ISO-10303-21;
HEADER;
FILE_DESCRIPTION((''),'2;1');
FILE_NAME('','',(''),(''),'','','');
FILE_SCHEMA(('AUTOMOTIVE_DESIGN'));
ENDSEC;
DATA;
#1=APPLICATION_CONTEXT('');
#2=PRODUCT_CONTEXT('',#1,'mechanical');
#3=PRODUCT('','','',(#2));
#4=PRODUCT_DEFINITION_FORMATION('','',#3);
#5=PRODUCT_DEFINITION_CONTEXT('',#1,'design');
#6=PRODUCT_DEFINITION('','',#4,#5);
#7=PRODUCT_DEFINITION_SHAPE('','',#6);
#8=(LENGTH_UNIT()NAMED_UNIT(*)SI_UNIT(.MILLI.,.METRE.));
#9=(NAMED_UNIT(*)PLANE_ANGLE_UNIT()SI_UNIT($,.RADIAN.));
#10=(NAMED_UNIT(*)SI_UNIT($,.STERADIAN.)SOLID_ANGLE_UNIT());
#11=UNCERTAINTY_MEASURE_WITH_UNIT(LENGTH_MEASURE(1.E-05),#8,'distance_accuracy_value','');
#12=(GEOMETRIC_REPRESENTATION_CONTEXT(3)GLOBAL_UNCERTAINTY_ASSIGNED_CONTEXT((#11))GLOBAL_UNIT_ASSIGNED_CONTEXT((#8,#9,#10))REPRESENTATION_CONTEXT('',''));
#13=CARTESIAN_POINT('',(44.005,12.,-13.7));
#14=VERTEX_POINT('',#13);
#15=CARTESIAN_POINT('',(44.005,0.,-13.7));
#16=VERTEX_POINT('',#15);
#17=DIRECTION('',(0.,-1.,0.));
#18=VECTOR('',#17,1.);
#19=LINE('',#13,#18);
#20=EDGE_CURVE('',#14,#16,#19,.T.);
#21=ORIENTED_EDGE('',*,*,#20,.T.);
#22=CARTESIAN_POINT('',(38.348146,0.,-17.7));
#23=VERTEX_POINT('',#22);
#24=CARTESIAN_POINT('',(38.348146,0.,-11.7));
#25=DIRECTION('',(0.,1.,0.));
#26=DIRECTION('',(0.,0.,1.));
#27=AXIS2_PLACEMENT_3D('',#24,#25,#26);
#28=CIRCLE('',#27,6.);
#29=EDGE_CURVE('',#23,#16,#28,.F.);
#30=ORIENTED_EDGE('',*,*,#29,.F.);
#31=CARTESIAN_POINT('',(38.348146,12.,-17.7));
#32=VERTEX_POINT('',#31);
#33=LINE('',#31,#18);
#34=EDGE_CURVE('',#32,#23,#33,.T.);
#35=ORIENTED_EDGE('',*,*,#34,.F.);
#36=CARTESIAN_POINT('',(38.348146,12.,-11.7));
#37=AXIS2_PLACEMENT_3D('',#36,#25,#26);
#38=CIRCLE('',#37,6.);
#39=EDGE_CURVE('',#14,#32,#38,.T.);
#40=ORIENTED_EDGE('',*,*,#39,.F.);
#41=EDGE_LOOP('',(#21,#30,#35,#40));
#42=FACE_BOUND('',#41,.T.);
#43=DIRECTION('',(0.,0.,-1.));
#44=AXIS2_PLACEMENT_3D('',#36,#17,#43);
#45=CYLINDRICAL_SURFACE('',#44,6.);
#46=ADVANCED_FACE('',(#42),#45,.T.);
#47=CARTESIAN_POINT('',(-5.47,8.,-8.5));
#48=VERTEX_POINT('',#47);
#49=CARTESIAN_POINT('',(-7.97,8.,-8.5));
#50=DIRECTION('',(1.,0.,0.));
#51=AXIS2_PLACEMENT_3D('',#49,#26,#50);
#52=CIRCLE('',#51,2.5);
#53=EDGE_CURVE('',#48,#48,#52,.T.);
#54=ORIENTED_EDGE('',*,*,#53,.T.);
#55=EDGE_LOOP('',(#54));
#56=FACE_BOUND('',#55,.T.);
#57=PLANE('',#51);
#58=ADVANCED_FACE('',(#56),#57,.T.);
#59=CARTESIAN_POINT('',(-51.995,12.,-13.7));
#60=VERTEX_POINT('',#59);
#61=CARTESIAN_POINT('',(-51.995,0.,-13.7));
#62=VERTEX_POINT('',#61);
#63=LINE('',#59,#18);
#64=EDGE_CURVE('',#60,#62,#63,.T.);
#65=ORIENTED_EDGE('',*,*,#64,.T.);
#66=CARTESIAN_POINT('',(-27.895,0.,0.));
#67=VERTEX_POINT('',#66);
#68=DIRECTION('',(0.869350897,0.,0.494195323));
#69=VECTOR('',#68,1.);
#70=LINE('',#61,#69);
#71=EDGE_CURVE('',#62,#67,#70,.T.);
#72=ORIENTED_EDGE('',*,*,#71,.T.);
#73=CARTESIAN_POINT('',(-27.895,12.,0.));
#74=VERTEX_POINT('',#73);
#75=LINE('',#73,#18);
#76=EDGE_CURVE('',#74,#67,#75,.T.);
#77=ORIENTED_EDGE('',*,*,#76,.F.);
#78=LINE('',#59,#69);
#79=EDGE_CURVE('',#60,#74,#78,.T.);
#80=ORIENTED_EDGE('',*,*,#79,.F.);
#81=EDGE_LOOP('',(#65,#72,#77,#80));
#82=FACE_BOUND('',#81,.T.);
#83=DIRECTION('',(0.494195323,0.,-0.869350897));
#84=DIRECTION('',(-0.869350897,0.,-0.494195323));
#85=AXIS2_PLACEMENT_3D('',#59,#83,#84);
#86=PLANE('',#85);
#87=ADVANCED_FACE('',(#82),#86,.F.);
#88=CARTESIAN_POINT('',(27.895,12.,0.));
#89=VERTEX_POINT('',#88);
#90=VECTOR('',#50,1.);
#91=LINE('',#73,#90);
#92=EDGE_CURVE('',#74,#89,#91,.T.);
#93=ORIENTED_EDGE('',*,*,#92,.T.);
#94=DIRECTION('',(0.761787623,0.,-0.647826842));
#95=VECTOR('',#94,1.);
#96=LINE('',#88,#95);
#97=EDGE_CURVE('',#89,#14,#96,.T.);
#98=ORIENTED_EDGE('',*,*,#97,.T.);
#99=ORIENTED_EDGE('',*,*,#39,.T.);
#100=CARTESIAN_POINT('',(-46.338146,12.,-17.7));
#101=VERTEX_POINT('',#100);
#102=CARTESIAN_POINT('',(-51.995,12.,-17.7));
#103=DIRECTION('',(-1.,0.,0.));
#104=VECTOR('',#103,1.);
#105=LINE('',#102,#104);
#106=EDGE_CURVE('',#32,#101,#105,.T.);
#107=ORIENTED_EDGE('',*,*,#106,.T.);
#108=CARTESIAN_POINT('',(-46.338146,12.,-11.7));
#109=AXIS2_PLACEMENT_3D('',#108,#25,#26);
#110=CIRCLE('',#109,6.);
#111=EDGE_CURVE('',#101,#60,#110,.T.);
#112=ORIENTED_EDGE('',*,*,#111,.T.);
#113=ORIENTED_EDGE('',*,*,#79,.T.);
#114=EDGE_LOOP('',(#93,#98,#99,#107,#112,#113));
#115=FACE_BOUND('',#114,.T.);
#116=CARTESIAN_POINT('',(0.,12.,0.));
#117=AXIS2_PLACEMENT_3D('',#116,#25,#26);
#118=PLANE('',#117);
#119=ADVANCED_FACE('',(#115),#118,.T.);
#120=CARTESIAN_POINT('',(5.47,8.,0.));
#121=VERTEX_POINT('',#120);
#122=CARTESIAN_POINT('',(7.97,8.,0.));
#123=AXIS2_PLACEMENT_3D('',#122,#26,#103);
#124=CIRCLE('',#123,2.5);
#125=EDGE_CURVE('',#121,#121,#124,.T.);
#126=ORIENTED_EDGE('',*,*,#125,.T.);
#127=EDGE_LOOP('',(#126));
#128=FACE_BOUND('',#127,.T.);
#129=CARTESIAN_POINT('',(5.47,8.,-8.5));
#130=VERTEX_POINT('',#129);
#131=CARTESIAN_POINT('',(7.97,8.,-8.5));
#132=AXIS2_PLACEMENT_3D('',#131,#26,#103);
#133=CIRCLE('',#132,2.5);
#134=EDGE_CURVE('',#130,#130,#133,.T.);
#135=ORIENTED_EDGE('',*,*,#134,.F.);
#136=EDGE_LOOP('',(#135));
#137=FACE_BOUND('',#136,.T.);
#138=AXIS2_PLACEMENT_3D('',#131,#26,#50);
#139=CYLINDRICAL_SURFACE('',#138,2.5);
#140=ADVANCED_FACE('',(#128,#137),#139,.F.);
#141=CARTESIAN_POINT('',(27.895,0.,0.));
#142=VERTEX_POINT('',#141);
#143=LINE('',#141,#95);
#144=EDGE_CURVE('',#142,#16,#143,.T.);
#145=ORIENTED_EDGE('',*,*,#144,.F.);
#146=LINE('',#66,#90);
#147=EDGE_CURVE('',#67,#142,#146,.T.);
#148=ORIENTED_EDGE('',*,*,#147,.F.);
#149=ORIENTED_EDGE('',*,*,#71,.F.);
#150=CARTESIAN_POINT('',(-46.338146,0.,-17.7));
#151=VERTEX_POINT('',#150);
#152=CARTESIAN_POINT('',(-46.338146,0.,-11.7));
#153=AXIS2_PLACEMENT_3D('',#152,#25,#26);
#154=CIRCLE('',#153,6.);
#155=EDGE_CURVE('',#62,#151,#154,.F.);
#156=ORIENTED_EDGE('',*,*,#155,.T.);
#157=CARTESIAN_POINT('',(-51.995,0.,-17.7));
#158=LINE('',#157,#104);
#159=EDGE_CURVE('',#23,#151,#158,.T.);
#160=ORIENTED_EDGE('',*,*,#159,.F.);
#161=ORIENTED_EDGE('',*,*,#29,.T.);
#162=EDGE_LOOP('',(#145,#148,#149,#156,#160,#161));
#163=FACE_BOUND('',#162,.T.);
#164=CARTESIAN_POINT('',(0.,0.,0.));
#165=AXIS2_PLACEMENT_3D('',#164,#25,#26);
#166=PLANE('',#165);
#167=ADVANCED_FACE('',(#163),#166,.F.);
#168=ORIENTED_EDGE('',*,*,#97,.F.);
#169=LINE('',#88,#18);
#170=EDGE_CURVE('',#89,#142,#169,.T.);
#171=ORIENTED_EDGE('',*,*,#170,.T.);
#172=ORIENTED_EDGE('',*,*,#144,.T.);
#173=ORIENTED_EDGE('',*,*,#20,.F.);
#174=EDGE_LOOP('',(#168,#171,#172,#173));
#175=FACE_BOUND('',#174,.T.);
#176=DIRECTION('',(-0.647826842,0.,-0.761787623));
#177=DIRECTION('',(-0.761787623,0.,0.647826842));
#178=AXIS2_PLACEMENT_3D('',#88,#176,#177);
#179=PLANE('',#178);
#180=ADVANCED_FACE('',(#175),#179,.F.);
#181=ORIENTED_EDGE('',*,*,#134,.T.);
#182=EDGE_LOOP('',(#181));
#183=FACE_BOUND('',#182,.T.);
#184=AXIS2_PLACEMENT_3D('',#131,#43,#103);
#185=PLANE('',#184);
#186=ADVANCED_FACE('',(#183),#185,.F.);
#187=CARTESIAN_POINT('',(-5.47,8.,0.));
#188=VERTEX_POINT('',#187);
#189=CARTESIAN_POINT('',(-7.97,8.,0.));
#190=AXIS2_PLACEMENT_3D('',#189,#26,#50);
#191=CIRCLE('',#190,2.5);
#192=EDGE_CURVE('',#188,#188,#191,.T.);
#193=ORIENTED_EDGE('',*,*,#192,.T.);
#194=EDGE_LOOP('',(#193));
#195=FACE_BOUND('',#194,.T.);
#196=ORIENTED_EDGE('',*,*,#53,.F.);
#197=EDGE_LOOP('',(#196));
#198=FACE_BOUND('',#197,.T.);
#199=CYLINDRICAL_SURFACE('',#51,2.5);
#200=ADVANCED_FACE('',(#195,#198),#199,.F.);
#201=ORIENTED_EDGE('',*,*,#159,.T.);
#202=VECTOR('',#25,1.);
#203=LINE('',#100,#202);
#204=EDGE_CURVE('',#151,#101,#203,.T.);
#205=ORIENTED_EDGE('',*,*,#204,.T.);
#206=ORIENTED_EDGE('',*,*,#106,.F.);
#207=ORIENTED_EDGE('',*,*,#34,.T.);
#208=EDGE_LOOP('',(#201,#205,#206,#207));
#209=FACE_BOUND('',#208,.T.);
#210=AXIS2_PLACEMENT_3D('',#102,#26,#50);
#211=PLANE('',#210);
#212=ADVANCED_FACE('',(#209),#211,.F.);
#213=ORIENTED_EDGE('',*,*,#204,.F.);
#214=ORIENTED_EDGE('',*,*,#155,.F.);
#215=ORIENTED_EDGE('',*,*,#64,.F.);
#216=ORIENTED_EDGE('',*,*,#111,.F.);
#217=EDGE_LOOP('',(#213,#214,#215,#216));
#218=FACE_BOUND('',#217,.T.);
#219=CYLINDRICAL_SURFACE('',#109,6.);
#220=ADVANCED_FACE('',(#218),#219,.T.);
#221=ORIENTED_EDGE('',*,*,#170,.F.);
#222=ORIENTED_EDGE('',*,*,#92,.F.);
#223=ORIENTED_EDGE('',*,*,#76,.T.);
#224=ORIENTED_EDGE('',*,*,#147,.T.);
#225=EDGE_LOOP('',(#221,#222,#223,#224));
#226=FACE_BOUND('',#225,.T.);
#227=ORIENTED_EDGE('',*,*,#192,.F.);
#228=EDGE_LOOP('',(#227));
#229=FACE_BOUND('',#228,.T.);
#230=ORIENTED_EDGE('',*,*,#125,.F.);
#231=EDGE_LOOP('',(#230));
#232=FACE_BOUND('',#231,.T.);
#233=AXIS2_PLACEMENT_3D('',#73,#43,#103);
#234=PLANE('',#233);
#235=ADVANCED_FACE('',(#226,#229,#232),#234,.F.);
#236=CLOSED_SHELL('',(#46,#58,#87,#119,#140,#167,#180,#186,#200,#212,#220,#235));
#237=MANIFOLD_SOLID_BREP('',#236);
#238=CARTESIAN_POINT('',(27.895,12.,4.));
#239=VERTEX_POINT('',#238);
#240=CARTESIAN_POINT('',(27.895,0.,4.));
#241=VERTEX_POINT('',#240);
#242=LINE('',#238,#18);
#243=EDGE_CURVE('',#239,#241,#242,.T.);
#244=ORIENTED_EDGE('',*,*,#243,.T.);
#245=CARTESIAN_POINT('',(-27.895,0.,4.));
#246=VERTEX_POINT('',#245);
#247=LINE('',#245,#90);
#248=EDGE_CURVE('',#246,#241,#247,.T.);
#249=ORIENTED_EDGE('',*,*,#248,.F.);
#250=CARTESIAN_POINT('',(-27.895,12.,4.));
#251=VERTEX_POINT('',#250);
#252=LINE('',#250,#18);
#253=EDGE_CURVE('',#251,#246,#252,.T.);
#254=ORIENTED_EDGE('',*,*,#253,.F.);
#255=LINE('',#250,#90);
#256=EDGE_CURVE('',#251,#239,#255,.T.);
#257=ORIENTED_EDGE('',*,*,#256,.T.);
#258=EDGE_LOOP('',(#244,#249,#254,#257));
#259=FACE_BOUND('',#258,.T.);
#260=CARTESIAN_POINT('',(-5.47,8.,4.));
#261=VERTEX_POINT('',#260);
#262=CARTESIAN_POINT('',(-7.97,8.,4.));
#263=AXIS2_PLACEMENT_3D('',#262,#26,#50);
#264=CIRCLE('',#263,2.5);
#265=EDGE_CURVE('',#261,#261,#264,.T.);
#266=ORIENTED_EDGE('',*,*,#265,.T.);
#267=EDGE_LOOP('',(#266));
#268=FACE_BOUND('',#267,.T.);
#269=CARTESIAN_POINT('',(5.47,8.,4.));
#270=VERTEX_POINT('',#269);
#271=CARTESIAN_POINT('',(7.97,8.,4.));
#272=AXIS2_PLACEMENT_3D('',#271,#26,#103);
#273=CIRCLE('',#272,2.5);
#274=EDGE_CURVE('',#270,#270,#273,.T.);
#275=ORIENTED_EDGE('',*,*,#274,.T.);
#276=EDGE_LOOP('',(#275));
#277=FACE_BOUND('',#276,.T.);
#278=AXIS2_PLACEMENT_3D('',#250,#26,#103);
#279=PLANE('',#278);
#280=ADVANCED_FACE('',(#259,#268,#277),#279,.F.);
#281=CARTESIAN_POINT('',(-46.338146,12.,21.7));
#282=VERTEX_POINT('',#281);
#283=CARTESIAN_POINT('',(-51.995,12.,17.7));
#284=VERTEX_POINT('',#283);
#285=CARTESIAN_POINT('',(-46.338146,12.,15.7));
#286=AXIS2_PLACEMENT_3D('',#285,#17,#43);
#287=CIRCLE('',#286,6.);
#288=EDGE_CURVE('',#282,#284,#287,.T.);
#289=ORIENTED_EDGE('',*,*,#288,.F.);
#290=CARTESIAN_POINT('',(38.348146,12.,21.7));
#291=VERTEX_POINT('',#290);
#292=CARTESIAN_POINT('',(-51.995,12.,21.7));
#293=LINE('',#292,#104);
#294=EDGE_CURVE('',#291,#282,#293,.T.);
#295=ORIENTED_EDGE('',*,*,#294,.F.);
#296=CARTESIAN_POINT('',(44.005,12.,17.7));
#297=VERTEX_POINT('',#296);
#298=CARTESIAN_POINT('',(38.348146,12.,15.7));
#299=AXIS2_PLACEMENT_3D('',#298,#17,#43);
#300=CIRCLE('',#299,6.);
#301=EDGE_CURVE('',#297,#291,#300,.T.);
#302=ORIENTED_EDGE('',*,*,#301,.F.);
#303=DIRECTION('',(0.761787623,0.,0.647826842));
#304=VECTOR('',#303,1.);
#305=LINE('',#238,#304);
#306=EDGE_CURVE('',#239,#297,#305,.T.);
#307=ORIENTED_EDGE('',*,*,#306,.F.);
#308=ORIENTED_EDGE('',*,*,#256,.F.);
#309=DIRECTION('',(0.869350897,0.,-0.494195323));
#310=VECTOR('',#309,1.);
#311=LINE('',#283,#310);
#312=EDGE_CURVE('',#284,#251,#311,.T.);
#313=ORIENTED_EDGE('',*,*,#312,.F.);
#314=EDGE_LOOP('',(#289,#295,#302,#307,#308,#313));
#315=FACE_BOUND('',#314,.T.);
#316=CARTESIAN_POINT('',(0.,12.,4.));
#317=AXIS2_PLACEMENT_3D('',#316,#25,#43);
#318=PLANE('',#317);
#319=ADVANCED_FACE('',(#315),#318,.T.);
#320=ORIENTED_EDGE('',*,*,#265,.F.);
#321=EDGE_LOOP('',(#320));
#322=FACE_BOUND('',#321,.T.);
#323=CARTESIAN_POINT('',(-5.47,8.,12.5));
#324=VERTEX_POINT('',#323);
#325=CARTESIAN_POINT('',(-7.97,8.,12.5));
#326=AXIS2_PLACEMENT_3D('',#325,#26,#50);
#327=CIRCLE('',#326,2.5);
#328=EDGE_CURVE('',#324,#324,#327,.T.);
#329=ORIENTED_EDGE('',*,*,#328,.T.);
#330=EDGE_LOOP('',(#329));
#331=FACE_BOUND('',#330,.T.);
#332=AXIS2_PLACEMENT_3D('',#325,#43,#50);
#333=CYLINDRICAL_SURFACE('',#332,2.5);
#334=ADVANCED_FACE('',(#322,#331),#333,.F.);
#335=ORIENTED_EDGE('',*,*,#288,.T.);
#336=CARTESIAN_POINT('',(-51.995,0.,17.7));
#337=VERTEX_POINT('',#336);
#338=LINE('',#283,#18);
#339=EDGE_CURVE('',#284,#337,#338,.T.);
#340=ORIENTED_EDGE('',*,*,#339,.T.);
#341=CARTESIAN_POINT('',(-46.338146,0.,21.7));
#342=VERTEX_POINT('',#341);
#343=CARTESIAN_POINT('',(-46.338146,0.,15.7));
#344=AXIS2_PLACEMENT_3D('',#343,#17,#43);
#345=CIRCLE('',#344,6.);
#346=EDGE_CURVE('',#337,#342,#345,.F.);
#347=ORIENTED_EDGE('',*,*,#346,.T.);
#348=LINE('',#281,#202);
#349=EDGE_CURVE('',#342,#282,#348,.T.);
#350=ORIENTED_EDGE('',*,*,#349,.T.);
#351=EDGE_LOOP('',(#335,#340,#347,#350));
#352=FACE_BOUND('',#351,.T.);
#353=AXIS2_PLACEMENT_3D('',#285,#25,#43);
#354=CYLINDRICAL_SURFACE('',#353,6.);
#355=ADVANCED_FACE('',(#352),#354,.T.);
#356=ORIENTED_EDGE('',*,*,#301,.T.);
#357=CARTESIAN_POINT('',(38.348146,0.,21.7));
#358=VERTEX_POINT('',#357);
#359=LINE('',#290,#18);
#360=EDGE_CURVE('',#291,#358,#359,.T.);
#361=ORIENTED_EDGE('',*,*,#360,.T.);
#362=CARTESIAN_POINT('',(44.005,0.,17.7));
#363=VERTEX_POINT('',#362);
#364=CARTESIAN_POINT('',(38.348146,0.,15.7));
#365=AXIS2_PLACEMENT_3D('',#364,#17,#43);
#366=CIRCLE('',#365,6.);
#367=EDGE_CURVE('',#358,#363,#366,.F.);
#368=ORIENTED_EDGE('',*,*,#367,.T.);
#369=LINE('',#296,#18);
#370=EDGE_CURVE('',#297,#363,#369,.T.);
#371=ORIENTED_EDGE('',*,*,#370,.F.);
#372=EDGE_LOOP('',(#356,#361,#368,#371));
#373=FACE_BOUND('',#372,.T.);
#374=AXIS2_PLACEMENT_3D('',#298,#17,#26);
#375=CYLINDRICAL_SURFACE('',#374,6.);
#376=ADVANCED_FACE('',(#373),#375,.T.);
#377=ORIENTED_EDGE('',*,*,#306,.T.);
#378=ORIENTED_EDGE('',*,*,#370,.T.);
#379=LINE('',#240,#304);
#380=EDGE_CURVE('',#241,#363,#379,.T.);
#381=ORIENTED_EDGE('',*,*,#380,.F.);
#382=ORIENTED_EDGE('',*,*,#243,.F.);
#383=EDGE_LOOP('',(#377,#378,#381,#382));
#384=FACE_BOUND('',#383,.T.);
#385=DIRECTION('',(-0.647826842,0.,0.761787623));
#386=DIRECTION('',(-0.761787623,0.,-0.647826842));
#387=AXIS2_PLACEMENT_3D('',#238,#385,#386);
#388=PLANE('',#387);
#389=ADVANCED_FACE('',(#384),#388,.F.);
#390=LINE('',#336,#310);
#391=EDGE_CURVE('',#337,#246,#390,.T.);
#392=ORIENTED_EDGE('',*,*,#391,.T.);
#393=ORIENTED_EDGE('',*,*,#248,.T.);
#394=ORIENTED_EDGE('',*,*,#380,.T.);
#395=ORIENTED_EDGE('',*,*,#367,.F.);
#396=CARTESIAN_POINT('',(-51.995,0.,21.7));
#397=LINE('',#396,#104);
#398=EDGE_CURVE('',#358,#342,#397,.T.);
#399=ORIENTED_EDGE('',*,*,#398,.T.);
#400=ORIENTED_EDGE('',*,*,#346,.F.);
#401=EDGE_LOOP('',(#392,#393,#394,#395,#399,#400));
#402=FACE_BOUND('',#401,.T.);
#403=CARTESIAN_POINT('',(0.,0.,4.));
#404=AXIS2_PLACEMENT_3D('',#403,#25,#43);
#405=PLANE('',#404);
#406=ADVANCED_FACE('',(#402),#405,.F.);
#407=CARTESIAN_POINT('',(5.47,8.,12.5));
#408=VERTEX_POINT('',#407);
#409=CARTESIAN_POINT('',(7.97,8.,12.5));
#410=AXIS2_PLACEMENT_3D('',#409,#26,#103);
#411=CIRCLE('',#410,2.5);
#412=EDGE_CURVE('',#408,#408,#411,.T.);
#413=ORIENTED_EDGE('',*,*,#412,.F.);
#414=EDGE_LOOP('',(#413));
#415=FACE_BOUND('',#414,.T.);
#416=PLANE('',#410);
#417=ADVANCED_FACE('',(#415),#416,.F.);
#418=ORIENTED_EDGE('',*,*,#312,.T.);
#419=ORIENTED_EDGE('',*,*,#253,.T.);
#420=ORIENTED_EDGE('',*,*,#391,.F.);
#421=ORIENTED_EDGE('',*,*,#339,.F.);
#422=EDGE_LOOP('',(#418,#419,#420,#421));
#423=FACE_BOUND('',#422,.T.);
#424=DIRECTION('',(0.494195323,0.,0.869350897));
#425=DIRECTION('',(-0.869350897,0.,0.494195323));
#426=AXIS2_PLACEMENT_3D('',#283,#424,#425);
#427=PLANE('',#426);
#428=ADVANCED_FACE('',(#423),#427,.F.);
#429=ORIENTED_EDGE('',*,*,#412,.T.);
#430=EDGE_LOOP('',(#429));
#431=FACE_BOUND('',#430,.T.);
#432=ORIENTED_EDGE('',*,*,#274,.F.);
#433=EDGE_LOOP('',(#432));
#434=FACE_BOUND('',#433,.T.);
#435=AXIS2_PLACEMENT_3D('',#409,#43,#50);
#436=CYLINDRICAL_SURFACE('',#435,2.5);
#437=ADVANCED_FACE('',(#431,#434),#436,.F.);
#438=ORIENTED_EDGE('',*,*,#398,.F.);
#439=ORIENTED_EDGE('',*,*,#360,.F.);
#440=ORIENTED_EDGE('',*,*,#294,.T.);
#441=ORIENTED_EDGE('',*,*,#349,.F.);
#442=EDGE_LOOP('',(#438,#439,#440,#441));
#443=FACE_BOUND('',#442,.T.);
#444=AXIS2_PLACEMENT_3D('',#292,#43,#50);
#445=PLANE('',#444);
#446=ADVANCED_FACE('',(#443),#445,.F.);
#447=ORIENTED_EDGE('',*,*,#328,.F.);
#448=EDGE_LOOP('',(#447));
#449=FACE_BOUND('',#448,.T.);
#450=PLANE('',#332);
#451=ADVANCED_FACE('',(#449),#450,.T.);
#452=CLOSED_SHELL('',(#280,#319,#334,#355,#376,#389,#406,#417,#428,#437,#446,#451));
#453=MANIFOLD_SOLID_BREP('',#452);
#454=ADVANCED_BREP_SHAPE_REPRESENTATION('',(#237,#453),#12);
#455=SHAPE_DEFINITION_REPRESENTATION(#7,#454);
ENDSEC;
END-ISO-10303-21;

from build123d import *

# Parameters (mm, degrees)
BOSS_EXTRUDE1_DEPTH = 12
SKETCH3_R           = 2.5
CUT_EXTRUDE1_DEPTH  = 8.5
FILLET1_R           = 6


with BuildPart() as part:
    # Sketch1 → Boss-Extrude1 (new body)
    with BuildSketch(Plane(origin=(0, 0, 0), x_dir=(1, 0, 0), z_dir=(0, 1, 0))):
        Polygon((-51.995, 17.7), (44.005, 17.7), (44.005, 13.7), (27.895, 0), (-27.895, 0), (-51.995, 13.7), align=None)
    extrude(amount=BOSS_EXTRUDE1_DEPTH)

    # Sketch3 → Cut-Extrude1 (cut)
    with BuildSketch(Plane.XY):
        with Locations((-7.97, 8)):
            Circle(SKETCH3_R)
        with Locations(Location((7.97, 8, 0), (0, 0, 180))):
            Circle(SKETCH3_R)
    extrude(amount=-CUT_EXTRUDE1_DEPTH, mode=Mode.SUBTRACT)

    # Fillet1
    # the kernel refuses this fillet: 6 mm, written as the material it takes off along each edge
    with BuildSketch(Plane(origin=(44.005, -14.142135624, -17.7), x_dir=(-1, 0, 0), z_dir=(0, 1, 0))) as fillet1_piece_1:
        with BuildLine():
            CenterArc((5.656854249, 6), FILLET1_R, 199.471220634, 70.528779366)
            Line((0, 4), (-0.113137085, 3.96))
            ThreePointArc((-0.113137085, 3.96), (-0.12, 2), (-0.12, 0))
            Line((-0.12, 0), (0, -0.12))
            Line((0, -0.12), (5.656854249, -0.12))
            Line((5.656854249, -0.12), (5.656854249, 0))
        make_face()
    extrude(amount=40.284271247, mode=Mode.SUBTRACT)
    with BuildSketch(Plane(origin=(-51.995, -14.142135624, -17.7), x_dir=(1, 0, 0), z_dir=(0, 1, 0))) as fillet1_piece_2:
        with BuildLine():
            CenterArc((5.656854249, -6), FILLET1_R, 90, 70.528779366)
            Line((0, -4), (-0.113137085, -3.96))
            ThreePointArc((-0.113137085, -3.96), (-0.12, -2), (-0.12, 0))
            Line((-0.12, 0), (0, 0.12))
            Line((0, 0.12), (5.656854249, 0.12))
            Line((5.656854249, 0.12), (5.656854249, 0))
        make_face()
    extrude(amount=40.284271247, mode=Mode.SUBTRACT)


with BuildPart() as body_2:
    # Mirror1: mirrored copy
    add(part.part.mirror(Plane.XY.offset(2)))


solid = Compound([part.part, body_2.part])
